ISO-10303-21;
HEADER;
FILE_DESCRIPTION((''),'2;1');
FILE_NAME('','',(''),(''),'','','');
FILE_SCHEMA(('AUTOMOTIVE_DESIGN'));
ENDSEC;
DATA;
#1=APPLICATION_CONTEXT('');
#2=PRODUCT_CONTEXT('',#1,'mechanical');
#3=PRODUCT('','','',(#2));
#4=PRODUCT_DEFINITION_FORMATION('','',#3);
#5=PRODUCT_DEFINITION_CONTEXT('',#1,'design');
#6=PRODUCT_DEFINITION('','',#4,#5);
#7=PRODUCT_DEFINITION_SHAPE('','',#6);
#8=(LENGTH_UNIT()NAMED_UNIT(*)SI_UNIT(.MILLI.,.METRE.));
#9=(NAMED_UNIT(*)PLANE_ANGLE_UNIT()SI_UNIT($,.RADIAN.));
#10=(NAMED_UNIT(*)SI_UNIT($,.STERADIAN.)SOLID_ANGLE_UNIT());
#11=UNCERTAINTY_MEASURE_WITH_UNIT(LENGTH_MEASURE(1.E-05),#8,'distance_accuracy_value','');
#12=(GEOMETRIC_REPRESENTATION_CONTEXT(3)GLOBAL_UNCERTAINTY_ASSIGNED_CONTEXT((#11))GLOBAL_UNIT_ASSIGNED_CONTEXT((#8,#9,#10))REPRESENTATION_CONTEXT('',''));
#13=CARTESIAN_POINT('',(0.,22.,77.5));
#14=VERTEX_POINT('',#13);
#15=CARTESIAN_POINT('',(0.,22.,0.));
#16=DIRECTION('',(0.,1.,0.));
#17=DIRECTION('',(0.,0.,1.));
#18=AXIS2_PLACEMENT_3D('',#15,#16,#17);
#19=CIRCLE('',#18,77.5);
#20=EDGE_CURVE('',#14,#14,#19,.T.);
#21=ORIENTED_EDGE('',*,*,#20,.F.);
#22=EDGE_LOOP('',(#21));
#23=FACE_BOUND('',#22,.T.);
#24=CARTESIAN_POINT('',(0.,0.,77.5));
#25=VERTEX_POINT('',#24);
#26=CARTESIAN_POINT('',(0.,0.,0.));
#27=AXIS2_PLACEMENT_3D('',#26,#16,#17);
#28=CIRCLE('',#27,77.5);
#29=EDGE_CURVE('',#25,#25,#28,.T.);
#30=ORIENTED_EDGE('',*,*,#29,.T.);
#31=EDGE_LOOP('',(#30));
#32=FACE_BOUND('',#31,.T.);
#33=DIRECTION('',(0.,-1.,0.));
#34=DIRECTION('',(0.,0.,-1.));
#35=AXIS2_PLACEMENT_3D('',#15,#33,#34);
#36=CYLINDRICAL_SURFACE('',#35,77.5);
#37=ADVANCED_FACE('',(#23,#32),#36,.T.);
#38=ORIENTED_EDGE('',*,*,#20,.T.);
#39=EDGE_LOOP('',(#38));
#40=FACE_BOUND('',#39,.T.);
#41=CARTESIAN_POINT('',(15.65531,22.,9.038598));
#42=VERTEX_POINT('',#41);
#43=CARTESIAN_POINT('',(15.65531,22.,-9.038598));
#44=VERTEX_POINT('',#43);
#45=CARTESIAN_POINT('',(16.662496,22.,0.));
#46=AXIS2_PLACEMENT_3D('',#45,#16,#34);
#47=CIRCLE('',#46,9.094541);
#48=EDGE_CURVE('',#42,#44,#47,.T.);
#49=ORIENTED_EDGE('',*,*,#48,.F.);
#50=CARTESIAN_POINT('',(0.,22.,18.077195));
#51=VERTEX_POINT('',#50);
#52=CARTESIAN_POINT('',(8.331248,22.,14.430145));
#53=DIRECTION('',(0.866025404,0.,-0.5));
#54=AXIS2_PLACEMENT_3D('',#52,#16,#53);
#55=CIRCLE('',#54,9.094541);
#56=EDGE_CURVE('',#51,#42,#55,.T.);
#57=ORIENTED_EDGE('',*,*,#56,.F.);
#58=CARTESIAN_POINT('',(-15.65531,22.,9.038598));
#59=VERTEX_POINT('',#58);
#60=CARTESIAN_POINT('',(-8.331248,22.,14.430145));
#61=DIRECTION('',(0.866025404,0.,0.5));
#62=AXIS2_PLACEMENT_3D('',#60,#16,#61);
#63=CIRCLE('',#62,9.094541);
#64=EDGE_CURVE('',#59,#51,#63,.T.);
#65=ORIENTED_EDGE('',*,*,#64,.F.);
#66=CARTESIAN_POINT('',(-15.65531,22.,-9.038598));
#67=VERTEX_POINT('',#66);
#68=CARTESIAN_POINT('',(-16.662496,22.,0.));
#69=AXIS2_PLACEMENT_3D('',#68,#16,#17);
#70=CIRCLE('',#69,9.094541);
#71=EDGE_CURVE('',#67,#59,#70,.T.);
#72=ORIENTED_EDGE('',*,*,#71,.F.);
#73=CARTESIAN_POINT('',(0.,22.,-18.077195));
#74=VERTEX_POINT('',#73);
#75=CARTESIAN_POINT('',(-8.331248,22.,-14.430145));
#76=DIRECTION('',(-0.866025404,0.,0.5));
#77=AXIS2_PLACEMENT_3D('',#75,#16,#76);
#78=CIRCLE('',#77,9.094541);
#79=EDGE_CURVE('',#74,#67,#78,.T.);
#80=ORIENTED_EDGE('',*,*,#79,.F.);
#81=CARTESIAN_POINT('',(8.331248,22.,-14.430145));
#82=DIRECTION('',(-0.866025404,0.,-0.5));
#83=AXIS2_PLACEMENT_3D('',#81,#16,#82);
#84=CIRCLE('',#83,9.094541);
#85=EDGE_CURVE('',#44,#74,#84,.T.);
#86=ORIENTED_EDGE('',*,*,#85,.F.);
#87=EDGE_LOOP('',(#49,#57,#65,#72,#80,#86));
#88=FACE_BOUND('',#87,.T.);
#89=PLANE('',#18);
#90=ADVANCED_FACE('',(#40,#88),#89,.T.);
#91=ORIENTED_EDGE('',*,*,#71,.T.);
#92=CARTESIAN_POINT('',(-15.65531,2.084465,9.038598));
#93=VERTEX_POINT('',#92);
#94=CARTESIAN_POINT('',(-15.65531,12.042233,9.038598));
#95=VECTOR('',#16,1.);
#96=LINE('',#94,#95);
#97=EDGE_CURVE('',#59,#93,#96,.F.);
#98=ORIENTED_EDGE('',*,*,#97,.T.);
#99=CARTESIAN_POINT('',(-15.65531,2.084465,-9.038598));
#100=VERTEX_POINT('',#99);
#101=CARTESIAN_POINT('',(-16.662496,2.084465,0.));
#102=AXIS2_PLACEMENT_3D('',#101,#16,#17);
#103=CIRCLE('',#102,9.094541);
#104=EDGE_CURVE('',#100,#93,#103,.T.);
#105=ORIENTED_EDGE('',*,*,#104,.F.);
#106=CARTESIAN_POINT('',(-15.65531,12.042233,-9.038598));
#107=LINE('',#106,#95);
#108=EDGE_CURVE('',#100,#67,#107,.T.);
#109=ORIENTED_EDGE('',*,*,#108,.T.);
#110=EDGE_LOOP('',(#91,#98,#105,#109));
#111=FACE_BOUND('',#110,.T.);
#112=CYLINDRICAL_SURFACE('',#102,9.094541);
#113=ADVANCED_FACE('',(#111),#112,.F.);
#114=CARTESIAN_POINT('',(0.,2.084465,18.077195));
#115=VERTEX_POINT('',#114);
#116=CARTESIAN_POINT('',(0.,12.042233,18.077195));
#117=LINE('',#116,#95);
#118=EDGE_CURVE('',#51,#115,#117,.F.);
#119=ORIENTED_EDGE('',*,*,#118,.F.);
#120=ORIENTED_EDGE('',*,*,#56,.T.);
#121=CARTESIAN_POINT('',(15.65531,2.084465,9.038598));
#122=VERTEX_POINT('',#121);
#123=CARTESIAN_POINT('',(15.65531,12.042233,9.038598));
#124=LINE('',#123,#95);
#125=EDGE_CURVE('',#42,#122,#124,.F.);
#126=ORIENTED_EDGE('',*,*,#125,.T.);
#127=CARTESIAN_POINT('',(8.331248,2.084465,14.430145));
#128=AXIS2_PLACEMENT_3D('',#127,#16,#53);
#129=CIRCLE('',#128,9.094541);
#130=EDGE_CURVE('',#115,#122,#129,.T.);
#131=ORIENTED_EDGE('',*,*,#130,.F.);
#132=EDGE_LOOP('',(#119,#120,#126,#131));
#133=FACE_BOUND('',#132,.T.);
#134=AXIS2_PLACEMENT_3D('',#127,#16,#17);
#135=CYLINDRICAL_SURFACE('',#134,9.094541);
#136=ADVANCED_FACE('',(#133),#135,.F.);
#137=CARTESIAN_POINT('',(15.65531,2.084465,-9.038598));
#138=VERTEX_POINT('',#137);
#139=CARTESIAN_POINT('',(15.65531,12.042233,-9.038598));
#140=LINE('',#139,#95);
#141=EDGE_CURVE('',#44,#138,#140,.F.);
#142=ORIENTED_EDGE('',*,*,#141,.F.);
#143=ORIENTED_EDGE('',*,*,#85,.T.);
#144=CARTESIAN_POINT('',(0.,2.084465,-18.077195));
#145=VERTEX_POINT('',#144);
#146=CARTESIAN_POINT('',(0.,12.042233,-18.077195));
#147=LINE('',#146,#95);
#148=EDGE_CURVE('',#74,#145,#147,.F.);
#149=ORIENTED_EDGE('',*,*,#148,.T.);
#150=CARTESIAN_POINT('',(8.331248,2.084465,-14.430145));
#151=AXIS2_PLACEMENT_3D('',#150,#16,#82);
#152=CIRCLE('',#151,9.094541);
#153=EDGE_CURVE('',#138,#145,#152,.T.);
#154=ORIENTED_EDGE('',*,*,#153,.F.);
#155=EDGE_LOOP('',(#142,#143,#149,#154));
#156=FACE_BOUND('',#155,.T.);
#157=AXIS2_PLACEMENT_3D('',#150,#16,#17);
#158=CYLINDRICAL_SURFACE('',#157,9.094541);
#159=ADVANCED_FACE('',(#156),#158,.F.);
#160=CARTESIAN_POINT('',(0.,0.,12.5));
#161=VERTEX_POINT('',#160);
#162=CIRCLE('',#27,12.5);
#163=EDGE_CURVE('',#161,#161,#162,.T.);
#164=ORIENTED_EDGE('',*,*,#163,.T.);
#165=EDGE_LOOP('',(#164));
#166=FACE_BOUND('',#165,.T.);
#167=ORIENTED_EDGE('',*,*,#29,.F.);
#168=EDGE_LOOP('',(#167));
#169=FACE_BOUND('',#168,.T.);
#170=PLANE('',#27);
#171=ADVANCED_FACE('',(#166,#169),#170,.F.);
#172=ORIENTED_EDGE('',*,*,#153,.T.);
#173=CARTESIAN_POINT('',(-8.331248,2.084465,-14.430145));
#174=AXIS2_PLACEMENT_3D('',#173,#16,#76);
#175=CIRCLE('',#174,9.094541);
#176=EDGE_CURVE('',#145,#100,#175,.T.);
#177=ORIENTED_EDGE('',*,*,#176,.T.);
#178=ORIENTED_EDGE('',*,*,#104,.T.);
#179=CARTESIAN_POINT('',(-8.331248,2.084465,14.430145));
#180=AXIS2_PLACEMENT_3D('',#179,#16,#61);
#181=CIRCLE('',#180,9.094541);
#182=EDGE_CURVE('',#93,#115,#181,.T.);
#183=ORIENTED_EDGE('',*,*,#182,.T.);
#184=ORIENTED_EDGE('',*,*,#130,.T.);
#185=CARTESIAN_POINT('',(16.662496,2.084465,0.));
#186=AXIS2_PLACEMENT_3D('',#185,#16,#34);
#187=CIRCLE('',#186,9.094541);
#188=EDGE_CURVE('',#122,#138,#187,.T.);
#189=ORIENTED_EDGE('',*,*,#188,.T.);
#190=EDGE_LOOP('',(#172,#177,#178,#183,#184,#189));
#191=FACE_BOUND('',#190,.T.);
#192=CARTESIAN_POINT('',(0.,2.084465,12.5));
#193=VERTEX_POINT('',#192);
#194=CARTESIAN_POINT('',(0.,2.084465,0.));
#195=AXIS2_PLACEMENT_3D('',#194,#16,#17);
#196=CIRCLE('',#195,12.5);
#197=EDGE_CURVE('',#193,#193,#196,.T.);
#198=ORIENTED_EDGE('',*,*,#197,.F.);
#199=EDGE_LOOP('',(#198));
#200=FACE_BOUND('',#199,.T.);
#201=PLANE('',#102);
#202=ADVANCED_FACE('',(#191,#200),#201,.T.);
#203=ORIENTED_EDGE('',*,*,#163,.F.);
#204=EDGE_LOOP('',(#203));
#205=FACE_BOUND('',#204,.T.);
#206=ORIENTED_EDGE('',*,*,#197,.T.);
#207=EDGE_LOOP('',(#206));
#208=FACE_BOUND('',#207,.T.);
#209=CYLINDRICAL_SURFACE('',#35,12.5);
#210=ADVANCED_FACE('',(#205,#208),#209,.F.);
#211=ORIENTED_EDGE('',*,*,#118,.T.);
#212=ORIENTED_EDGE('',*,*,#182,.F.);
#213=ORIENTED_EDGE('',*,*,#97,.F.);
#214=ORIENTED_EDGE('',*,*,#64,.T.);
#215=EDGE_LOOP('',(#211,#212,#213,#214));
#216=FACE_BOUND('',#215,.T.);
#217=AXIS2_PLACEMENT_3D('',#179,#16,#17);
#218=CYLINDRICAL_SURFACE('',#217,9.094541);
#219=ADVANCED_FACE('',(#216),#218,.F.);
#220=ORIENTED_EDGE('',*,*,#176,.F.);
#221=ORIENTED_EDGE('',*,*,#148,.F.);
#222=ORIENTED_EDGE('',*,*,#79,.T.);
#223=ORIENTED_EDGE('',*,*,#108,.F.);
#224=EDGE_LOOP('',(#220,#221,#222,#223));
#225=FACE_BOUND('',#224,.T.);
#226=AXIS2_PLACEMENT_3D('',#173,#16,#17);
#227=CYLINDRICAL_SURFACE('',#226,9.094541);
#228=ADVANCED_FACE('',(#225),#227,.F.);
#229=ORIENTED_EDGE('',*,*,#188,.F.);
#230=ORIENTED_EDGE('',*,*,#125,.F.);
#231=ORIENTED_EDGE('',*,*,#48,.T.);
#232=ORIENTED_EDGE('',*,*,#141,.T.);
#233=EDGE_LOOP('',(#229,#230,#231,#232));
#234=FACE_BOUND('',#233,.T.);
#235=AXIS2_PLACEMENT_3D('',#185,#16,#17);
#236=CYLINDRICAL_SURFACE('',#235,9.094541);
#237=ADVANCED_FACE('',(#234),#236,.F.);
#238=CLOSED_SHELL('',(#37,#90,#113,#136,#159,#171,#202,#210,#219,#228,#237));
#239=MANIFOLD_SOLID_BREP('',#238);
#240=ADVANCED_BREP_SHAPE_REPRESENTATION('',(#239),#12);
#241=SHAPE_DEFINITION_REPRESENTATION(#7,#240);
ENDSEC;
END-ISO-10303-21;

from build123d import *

# Parameters (mm, degrees)
SKETCH1_R           = 77.5
BOSS_EXTRUDE1_DEPTH = 22
SKETCH2_R           = 12.5
CUT_EXTRUDE1_DEPTH  = 112.787745303
SKETCH3_R           = 9.094540672
CUT_EXTRUDE2_DEPTH  = 19.91553476
CIRPATTERN1_COUNT   = 6


with BuildPart() as part:
    # Sketch1 → Boss-Extrude1 (new body)
    with BuildSketch(Plane(origin=(0, 0, 0), x_dir=(1, 0, 0), z_dir=(0, 1, 0))):
        Circle(SKETCH1_R)
    extrude(amount=BOSS_EXTRUDE1_DEPTH)

    # Sketch2 → Cut-Extrude1 (cut, through all)
    with BuildSketch(Plane(origin=(0, 0, 0), x_dir=(1, 0, 0), z_dir=(0, 1, 0))):
        Circle(SKETCH2_R)
    extrude(amount=CUT_EXTRUDE1_DEPTH, mode=Mode.SUBTRACT)

    # Sketch3 → Cut-Extrude2 (cut)
    with BuildSketch(Plane(origin=(0, 22, 0), x_dir=(1, 0, 0), z_dir=(0, 1, 0))):
        with Locations((-16.662496282, 0)):
            Circle(SKETCH3_R)
    cut_extrude2 = extrude(amount=-CUT_EXTRUDE2_DEPTH, mode=Mode.SUBTRACT)

    # CirPattern1: Cut-Extrude2 ×6 about axis
    cirpattern1_axis = Axis((0, 0, 0), (0, 1, 0))
    for i in range(1, CIRPATTERN1_COUNT):
        add(cut_extrude2.rotate(cirpattern1_axis, i * 360 / CIRPATTERN1_COUNT), mode=Mode.SUBTRACT)


solid = part.part
